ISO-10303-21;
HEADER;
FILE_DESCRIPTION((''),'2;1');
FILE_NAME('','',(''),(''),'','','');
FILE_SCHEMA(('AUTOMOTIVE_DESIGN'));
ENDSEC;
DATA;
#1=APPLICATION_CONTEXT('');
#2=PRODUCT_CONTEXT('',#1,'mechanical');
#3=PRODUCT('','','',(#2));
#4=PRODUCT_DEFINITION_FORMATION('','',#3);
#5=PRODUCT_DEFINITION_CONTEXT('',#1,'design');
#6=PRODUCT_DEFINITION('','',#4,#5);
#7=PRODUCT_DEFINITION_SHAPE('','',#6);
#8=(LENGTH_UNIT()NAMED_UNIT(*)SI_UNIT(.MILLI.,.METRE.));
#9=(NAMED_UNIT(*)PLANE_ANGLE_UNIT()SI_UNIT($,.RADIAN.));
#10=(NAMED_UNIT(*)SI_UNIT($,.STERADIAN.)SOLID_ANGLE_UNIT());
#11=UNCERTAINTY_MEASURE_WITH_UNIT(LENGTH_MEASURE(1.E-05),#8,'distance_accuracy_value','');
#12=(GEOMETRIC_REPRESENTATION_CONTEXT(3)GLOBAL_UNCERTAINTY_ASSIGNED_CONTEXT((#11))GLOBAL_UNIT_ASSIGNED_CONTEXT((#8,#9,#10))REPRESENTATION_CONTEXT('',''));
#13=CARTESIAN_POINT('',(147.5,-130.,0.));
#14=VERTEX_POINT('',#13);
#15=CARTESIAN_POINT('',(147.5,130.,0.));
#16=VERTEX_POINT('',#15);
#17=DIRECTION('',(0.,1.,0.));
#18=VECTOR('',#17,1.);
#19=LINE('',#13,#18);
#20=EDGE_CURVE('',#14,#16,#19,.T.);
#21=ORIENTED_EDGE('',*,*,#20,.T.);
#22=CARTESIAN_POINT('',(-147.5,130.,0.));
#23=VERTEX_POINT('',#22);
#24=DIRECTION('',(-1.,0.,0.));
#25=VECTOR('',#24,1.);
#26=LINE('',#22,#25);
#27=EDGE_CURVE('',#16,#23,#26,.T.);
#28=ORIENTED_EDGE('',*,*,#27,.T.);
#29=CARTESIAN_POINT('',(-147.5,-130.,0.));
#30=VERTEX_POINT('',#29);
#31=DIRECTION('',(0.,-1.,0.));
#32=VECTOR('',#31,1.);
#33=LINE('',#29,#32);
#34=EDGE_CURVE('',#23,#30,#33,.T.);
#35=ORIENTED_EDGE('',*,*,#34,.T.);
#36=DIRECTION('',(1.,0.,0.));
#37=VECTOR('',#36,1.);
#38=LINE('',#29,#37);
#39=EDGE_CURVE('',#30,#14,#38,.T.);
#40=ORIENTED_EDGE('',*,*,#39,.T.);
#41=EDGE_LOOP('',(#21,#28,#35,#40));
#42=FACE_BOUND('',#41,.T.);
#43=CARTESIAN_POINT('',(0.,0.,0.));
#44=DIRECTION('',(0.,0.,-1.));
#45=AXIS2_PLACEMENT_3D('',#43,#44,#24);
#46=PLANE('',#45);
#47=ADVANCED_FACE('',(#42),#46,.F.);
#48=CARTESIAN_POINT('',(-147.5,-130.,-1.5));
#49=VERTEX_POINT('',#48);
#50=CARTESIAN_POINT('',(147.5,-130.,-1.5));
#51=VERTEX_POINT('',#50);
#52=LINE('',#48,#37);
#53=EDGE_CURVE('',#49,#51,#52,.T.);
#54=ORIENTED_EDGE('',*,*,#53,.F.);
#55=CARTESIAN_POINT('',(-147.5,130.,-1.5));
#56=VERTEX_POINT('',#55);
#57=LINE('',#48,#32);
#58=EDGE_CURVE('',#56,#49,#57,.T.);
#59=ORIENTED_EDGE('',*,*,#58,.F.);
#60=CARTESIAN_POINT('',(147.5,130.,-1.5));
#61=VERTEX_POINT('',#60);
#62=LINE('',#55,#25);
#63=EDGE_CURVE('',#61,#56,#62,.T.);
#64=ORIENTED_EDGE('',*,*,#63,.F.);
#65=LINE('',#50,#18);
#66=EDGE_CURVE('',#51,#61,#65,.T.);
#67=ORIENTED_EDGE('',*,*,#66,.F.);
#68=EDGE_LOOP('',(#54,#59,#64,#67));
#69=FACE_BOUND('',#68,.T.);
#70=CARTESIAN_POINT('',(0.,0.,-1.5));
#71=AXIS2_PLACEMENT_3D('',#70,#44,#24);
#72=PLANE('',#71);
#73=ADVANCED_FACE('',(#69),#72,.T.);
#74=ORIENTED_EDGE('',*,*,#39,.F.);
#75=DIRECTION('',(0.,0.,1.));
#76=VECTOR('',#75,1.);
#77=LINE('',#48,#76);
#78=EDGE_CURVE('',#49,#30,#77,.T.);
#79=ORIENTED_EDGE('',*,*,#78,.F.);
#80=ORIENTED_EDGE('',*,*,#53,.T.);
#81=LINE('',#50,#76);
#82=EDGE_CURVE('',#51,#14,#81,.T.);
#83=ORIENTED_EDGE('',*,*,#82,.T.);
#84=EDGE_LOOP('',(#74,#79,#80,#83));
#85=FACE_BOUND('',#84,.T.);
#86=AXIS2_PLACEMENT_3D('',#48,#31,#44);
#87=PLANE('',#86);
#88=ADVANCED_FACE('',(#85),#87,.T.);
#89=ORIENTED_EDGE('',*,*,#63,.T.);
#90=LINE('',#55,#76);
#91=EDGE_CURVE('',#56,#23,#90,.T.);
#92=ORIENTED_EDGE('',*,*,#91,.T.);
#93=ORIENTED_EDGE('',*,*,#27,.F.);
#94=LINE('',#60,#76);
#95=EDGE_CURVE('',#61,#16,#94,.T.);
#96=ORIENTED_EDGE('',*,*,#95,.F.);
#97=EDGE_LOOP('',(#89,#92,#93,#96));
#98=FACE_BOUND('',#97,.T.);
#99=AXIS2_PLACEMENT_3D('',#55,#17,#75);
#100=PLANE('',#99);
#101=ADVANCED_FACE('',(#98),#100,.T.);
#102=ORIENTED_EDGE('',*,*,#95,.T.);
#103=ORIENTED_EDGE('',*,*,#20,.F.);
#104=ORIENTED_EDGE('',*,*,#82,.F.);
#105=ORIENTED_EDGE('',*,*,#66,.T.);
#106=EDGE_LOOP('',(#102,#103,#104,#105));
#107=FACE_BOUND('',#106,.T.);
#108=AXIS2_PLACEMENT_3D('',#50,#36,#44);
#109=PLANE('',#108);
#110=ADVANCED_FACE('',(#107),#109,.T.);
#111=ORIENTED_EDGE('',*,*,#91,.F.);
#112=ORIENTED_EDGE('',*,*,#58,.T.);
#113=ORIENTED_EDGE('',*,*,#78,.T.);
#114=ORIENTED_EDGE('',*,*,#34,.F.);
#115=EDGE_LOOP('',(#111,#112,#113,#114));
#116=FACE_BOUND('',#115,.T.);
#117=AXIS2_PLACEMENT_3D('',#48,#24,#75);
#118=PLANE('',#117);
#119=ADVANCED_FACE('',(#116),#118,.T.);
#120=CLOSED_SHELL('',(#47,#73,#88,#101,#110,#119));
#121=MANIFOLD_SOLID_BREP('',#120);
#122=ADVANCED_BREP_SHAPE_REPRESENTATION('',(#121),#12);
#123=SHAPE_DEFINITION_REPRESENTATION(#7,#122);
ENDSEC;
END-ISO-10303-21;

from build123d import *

# Parameters (mm, degrees)
SKETCH_1_W             = 295
SKETCH_1_H             = 260
SM_BASE_FLANGE_1_DEPTH = 1.5


# Sheet-metal steps are written as plain solids
with BuildPart() as part:
    # Sketch 1 → 基体-法兰1 (new body)
    with BuildSketch(Plane.XY):
        Rectangle(SKETCH_1_W, SKETCH_1_H)
    extrude(amount=-SM_BASE_FLANGE_1_DEPTH)


solid = part.part
